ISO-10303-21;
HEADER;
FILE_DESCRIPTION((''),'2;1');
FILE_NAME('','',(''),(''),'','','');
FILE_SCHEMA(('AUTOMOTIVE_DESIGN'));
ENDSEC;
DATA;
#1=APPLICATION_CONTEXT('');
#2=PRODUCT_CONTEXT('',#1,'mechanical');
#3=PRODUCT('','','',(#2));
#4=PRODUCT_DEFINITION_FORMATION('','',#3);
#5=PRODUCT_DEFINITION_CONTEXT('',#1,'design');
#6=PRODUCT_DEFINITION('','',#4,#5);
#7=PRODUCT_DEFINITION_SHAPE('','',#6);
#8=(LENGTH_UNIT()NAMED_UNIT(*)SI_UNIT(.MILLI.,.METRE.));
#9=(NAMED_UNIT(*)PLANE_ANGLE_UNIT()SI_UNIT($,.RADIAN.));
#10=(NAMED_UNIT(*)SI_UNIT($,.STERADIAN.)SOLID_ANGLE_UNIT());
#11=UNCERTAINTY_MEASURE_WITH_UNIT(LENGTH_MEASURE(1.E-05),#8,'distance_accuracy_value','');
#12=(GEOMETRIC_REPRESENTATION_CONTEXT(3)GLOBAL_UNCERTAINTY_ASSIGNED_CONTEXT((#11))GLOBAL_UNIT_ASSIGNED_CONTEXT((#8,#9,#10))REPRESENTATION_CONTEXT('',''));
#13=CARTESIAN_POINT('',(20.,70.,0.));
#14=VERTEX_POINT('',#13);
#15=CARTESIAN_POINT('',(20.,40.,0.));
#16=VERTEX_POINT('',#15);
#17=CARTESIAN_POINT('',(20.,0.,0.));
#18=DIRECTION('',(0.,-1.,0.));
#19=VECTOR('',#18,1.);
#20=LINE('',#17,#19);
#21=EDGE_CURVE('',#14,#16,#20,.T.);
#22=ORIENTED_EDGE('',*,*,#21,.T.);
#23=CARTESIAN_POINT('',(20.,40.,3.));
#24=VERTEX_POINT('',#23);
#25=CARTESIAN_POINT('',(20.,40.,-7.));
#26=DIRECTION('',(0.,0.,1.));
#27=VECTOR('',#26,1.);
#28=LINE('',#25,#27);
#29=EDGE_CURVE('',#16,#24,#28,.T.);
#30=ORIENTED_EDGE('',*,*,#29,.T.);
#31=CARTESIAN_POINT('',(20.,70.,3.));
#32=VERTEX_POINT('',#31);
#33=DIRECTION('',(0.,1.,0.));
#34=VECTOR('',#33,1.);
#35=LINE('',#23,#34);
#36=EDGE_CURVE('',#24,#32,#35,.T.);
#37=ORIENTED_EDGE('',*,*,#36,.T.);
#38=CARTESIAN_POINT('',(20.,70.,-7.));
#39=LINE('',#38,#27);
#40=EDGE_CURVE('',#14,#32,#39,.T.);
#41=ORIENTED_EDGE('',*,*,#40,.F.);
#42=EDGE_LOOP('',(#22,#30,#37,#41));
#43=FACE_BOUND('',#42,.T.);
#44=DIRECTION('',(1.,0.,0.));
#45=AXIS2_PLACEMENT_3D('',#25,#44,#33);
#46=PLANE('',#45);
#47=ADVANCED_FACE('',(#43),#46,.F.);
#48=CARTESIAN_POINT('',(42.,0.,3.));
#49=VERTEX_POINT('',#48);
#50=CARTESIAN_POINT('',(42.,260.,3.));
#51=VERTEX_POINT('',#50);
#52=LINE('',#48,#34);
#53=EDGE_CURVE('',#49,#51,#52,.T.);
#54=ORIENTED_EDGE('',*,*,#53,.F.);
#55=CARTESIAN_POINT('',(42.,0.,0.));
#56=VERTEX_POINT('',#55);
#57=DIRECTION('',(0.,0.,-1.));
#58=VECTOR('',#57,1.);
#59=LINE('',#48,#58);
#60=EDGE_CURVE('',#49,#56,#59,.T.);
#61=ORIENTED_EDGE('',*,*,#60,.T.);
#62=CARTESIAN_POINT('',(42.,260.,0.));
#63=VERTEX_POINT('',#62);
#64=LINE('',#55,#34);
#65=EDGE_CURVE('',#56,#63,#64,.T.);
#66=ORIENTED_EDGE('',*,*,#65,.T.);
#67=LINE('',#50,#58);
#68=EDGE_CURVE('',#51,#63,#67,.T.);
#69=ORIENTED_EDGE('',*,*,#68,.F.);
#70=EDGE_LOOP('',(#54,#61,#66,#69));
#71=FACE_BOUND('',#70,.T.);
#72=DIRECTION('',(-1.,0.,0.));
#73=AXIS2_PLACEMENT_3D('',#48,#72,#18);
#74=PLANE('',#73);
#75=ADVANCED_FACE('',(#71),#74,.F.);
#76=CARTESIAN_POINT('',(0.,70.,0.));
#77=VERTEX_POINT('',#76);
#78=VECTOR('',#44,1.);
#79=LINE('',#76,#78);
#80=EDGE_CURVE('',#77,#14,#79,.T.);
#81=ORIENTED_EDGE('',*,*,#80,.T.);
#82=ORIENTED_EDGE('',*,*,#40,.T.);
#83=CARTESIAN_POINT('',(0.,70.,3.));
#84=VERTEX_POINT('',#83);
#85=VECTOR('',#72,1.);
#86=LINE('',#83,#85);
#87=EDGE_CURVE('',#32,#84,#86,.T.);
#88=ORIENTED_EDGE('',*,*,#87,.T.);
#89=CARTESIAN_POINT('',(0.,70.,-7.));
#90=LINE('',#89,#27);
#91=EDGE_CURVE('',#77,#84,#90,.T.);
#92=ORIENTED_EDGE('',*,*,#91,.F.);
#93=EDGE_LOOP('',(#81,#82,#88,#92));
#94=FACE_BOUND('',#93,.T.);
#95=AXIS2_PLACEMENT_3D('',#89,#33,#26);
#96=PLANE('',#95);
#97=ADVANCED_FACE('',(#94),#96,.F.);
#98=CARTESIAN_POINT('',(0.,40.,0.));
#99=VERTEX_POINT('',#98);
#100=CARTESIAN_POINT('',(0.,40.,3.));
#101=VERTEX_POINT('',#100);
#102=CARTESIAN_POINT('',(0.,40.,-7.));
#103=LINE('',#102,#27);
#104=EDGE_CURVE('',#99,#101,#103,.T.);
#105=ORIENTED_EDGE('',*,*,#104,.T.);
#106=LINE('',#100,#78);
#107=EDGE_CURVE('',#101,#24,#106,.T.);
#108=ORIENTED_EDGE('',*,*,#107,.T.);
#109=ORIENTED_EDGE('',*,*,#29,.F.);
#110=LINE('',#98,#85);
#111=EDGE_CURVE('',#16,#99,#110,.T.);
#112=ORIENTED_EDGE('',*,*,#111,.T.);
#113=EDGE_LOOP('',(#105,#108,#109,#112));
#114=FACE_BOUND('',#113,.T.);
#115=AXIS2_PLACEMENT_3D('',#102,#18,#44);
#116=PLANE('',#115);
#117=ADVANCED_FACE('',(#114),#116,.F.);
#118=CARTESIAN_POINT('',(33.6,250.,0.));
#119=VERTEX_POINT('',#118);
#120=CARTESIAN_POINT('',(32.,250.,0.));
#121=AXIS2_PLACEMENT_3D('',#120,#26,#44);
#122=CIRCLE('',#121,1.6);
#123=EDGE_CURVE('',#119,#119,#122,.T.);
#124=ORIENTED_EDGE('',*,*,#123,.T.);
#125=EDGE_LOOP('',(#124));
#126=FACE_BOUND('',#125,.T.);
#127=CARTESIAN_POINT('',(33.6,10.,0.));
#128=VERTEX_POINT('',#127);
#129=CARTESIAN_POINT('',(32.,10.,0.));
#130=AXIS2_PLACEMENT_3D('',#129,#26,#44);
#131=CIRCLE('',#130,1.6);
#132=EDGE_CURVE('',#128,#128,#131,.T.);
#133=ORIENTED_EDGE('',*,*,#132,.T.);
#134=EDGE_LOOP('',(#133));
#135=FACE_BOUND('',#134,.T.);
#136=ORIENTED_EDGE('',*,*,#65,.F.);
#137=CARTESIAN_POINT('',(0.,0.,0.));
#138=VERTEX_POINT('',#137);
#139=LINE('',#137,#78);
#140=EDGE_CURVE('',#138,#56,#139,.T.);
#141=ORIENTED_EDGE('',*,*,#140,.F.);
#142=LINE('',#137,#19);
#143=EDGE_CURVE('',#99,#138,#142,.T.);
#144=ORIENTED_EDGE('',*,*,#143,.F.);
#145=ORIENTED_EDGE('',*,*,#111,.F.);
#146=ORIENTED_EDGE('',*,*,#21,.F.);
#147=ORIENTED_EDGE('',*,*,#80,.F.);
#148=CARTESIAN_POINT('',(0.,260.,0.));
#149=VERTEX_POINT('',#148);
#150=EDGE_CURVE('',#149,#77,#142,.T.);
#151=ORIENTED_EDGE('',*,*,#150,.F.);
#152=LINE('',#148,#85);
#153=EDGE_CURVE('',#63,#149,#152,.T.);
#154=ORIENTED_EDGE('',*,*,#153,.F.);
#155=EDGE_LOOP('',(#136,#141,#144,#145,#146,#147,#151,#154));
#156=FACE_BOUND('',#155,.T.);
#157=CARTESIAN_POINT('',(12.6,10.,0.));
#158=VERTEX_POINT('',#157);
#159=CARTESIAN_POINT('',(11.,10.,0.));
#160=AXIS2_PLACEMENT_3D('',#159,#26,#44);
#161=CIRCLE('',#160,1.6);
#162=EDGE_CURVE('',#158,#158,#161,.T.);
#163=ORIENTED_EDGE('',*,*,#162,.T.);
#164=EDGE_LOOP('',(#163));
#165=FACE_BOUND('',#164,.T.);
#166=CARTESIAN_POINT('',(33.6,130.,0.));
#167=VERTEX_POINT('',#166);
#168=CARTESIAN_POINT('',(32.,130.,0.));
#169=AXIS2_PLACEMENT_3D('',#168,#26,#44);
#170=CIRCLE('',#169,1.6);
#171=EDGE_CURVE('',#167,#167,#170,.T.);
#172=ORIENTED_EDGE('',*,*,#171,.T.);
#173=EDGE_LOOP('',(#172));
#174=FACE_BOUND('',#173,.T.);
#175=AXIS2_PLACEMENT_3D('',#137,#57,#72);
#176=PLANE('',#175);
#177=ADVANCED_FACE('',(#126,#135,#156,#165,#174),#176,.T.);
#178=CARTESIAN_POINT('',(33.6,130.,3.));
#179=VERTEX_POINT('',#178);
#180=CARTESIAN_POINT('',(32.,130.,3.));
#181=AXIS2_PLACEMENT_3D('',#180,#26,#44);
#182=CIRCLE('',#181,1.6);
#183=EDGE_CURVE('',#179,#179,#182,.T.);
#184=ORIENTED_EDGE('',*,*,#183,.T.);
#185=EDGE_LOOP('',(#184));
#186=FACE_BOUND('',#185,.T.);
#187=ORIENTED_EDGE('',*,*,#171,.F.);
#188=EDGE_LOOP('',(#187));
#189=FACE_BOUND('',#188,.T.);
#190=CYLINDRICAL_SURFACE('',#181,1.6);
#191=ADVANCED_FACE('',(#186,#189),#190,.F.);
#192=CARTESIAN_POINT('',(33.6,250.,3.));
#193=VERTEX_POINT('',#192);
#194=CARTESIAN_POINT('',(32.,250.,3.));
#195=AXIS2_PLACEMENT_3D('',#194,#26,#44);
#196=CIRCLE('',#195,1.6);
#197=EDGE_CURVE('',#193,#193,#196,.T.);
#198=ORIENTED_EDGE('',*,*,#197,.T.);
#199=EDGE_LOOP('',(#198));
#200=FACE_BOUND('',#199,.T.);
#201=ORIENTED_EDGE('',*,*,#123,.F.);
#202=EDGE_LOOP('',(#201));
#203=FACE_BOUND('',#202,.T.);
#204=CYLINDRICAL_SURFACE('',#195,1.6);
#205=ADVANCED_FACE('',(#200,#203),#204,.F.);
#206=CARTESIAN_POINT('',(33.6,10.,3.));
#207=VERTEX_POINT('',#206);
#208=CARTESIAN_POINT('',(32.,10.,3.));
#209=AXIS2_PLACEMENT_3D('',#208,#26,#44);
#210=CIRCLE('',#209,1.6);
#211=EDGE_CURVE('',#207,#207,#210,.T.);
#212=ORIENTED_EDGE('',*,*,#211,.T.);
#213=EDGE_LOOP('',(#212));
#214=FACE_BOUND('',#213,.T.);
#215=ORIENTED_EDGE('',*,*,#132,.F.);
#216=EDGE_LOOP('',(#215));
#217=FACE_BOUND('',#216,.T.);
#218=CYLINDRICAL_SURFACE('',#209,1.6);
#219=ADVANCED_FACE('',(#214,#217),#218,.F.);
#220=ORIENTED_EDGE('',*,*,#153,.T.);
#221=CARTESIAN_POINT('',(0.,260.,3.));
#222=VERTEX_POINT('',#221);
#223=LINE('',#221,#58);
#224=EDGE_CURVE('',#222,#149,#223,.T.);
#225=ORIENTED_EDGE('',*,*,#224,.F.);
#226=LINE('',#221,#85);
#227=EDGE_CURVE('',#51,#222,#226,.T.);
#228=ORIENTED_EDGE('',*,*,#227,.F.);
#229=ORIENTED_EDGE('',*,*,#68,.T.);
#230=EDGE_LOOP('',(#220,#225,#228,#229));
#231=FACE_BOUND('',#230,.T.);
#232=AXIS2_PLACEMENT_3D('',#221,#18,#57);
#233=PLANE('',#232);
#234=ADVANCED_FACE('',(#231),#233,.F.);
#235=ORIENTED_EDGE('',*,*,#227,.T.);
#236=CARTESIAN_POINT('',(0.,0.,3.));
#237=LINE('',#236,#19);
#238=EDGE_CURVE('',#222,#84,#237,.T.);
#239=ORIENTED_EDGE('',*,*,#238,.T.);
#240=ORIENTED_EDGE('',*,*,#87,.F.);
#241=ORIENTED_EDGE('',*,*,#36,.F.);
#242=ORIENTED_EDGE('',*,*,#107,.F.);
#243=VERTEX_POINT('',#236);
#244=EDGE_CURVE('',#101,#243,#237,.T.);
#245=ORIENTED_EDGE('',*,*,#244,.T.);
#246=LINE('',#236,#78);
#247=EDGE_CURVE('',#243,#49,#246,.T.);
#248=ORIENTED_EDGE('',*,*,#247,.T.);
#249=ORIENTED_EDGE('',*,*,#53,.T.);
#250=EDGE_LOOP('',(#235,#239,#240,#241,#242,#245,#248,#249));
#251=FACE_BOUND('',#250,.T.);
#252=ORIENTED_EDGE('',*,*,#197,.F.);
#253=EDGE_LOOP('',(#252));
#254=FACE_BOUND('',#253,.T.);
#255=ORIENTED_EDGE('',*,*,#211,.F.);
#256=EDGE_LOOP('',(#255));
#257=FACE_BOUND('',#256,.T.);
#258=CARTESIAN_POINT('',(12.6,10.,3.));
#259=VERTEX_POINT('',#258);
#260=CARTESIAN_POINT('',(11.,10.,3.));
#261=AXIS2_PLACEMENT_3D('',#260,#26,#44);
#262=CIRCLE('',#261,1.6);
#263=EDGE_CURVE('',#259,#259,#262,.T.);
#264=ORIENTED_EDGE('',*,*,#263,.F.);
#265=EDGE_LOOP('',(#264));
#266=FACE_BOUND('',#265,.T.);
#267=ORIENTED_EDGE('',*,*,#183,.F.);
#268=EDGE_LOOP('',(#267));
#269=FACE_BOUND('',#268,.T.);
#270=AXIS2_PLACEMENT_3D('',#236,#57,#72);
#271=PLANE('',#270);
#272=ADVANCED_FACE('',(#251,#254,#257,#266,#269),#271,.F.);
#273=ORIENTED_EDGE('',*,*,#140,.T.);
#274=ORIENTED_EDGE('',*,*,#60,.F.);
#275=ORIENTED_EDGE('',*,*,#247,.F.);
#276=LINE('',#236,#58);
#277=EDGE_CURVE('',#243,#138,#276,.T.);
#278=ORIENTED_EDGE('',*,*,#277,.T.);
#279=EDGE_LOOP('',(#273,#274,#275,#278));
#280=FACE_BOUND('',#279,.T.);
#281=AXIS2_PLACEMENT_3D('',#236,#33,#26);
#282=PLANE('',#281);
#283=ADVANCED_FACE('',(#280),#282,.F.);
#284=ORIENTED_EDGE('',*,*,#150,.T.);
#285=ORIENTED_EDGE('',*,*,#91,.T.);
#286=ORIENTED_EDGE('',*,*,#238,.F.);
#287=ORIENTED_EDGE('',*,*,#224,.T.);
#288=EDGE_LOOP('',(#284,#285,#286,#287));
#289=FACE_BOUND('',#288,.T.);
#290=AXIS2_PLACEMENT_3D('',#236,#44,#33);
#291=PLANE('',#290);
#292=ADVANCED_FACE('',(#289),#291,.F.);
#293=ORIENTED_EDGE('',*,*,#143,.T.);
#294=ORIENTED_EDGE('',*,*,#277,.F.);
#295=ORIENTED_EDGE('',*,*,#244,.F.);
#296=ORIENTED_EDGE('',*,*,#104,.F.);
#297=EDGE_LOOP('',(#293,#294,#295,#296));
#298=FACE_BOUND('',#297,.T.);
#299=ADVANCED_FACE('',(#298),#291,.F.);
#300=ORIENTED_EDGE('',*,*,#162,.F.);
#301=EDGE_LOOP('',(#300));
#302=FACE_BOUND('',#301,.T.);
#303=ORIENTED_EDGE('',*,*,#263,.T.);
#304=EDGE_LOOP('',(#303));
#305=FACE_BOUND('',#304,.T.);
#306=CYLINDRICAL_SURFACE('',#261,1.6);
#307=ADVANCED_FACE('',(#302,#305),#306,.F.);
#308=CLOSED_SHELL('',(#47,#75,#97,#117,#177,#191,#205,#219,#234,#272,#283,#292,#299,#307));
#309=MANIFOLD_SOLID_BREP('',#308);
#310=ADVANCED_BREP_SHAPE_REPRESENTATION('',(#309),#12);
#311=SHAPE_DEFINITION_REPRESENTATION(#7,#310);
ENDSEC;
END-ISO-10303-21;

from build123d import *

# Parameters (mm, degrees)
SKETCH1_W                    = 42
SKETCH1_H                    = 260
BOSS_EXTRUDE1_DEPTH          = 3
M3_CLEARANCE_HOLE1_OUTLINE_R = 1.6
M3_CLEARANCE_HOLE1_DEPTH     = 3
SKETCH4_W                    = 20
SKETCH4_H                    = 30
CUT_EXTRUDE1_DEPTH           = 10


# Read off the part's stored shape, not the designer's step: M3 Clearance Hole1
with BuildPart() as part:
    # Sketch1 → Boss-Extrude1 (new body)
    with BuildSketch(Plane.XY):
        with Locations((21, 130)):
            Rectangle(SKETCH1_W, SKETCH1_H)
    extrude(amount=BOSS_EXTRUDE1_DEPTH)

    # M3 Clearance Hole1 outline → M3 Clearance Hole1 (cut)
    with BuildSketch(Plane.XY):
        with Locations((32, 130)):
            Circle(M3_CLEARANCE_HOLE1_OUTLINE_R)
        with Locations((32, 10)):
            Circle(M3_CLEARANCE_HOLE1_OUTLINE_R)
        with Locations((32, 250)):
            Circle(M3_CLEARANCE_HOLE1_OUTLINE_R)
        with Locations((11, 10)):
            Circle(M3_CLEARANCE_HOLE1_OUTLINE_R)
    extrude(amount=M3_CLEARANCE_HOLE1_DEPTH, mode=Mode.SUBTRACT)

    # Sketch4 → Cut-Extrude1 (cut)
    with BuildSketch(Plane.XY.offset(3)):
        with Locations((10, 55)):
            Rectangle(SKETCH4_W, SKETCH4_H)
    extrude(amount=-CUT_EXTRUDE1_DEPTH, mode=Mode.SUBTRACT)


solid = part.part
